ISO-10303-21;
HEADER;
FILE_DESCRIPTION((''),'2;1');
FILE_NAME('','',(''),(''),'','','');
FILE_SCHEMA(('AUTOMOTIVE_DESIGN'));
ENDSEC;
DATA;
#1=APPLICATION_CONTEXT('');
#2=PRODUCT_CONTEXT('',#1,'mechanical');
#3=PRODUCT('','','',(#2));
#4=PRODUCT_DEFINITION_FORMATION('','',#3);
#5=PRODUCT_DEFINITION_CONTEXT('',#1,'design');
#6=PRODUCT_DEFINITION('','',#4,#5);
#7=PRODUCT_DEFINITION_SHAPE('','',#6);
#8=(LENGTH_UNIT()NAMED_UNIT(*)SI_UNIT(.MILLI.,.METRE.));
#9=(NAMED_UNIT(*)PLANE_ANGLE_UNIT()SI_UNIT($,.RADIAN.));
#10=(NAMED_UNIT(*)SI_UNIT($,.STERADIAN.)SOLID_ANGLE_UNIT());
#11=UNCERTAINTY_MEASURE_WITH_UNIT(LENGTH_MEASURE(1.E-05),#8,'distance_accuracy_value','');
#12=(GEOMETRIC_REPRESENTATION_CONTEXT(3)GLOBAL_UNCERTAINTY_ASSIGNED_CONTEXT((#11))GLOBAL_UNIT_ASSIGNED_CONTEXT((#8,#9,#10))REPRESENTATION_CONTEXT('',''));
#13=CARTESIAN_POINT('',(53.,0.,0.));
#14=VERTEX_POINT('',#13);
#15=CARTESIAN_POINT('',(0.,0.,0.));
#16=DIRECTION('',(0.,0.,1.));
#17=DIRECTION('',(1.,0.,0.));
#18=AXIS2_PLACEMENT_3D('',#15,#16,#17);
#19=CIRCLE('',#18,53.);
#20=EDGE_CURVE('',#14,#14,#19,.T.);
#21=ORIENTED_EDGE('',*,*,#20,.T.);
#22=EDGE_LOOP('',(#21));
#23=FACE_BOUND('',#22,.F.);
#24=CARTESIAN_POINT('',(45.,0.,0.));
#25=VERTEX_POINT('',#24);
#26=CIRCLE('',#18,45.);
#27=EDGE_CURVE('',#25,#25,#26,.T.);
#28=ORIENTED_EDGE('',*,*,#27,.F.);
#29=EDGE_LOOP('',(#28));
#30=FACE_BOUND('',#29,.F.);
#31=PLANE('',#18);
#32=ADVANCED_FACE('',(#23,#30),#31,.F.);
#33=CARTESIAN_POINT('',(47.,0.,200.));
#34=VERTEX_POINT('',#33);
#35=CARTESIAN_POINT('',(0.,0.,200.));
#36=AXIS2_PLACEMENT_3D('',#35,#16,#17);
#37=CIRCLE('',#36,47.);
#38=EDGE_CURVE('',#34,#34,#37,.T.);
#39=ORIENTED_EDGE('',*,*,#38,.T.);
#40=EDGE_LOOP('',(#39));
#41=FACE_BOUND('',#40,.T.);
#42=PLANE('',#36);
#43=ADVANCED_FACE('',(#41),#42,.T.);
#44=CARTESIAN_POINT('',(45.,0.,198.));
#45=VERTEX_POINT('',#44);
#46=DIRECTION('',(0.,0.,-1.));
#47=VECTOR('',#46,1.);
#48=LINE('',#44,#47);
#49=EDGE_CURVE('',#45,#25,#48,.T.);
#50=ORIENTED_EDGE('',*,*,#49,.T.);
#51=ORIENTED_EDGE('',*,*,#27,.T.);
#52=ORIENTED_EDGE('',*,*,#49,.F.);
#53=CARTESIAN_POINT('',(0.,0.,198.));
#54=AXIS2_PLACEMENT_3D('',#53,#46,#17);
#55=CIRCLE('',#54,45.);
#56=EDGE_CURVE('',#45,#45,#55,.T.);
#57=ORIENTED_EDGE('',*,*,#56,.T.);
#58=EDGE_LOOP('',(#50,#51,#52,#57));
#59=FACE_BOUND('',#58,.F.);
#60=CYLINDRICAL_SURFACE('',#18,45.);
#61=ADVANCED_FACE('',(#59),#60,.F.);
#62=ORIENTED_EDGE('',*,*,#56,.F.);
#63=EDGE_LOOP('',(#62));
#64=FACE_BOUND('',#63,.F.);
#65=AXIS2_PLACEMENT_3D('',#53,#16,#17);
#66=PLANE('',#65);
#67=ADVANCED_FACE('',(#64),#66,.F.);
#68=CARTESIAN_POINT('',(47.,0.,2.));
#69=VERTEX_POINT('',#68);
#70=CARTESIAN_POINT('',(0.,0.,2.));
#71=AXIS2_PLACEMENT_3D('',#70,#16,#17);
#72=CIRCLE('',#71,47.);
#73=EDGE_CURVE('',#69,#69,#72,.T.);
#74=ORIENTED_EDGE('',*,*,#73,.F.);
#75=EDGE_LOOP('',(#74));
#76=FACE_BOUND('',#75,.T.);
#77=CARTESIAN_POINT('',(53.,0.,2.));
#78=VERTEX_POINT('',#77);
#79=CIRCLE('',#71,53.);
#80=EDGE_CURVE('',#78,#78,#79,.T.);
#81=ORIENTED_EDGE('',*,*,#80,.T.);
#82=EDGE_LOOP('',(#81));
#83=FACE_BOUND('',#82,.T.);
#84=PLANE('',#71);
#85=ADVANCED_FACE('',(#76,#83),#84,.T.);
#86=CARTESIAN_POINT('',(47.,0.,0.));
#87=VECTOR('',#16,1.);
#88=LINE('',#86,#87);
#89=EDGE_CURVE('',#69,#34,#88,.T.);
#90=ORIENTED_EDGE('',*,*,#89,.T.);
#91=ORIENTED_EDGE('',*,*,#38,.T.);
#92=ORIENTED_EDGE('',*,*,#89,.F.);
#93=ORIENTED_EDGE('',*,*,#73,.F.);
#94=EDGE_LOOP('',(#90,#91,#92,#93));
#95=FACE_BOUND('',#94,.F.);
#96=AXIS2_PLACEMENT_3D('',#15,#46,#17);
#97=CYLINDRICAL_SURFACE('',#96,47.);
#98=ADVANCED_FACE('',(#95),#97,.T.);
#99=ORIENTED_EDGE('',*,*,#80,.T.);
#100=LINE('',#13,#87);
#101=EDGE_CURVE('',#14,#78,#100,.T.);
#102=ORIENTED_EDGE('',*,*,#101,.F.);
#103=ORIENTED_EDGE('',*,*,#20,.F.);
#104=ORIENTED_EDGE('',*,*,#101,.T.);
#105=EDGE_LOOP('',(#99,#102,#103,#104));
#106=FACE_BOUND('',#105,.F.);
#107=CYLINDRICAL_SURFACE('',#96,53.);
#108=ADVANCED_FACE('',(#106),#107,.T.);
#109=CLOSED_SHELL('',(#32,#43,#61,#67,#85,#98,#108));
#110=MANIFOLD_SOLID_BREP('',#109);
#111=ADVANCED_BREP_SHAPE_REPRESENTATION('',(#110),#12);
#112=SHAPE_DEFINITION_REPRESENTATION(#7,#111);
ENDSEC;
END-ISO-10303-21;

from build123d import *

# Parameters (mm, degrees)
F0_R     = 53
F0_R_2   = 47
F1_DEPTH = 2
F2_DEPTH = 200
F3_T     = 2


# Not quite as in the source:
# - a shell that OpenCascade refuses in one call is made with other operations: the cavity is built on its own and cut out


with BuildPart() as f1:
    # F0 (on Top) → F1 (new body)
    with BuildSketch(Plane.XY):
        Circle(F0_R)
        Circle(F0_R_2, mode=Mode.SUBTRACT)
    extrude(amount=F1_DEPTH)

    # F0 (on Top) → F2 (join)
    with BuildSketch(Plane.XY):
        Circle(F0_R_2)
    extrude(amount=F2_DEPTH)

    # F3: shell of thickness 2, made by hand


with BuildPart() as f3_core1:
    # F3_t2: copy of F1
    add(f1.part)

    # the walls: a layer under each face that stays
    f3_faces = [f3_core1.faces().sort_by_distance(p)[0] for p in [
        (-53, 0, 1),
        (-35.3333333333, -35.3333333333, 2),
        (-47, 0, 101),
        (0, 0, 200),
    ]]
    thicken(f3_faces, amount=-F3_T, mode=Mode.SUBTRACT)

    # F3_s3 → F3_t4 (revolve, cut)
    with BuildSketch(Plane.XZ):
        Polygon((47.02, 2.02), (47, 0), (45, 0), (45, 2), align=None)
    revolve(axis=Axis((0, 0, 2), (0, 0, 1)), mode=Mode.SUBTRACT)


with BuildPart() as f1_1:
    add(f1.part)

    # what is left inside the walls is the cavity
    f3_cavity = [f3_core1.part.solids().sort_by_distance(p)[0] for p in [
        (-44.98, 0, 132.666667),
    ]]
    add(f3_cavity, mode=Mode.SUBTRACT)


solid = f1_1.part
